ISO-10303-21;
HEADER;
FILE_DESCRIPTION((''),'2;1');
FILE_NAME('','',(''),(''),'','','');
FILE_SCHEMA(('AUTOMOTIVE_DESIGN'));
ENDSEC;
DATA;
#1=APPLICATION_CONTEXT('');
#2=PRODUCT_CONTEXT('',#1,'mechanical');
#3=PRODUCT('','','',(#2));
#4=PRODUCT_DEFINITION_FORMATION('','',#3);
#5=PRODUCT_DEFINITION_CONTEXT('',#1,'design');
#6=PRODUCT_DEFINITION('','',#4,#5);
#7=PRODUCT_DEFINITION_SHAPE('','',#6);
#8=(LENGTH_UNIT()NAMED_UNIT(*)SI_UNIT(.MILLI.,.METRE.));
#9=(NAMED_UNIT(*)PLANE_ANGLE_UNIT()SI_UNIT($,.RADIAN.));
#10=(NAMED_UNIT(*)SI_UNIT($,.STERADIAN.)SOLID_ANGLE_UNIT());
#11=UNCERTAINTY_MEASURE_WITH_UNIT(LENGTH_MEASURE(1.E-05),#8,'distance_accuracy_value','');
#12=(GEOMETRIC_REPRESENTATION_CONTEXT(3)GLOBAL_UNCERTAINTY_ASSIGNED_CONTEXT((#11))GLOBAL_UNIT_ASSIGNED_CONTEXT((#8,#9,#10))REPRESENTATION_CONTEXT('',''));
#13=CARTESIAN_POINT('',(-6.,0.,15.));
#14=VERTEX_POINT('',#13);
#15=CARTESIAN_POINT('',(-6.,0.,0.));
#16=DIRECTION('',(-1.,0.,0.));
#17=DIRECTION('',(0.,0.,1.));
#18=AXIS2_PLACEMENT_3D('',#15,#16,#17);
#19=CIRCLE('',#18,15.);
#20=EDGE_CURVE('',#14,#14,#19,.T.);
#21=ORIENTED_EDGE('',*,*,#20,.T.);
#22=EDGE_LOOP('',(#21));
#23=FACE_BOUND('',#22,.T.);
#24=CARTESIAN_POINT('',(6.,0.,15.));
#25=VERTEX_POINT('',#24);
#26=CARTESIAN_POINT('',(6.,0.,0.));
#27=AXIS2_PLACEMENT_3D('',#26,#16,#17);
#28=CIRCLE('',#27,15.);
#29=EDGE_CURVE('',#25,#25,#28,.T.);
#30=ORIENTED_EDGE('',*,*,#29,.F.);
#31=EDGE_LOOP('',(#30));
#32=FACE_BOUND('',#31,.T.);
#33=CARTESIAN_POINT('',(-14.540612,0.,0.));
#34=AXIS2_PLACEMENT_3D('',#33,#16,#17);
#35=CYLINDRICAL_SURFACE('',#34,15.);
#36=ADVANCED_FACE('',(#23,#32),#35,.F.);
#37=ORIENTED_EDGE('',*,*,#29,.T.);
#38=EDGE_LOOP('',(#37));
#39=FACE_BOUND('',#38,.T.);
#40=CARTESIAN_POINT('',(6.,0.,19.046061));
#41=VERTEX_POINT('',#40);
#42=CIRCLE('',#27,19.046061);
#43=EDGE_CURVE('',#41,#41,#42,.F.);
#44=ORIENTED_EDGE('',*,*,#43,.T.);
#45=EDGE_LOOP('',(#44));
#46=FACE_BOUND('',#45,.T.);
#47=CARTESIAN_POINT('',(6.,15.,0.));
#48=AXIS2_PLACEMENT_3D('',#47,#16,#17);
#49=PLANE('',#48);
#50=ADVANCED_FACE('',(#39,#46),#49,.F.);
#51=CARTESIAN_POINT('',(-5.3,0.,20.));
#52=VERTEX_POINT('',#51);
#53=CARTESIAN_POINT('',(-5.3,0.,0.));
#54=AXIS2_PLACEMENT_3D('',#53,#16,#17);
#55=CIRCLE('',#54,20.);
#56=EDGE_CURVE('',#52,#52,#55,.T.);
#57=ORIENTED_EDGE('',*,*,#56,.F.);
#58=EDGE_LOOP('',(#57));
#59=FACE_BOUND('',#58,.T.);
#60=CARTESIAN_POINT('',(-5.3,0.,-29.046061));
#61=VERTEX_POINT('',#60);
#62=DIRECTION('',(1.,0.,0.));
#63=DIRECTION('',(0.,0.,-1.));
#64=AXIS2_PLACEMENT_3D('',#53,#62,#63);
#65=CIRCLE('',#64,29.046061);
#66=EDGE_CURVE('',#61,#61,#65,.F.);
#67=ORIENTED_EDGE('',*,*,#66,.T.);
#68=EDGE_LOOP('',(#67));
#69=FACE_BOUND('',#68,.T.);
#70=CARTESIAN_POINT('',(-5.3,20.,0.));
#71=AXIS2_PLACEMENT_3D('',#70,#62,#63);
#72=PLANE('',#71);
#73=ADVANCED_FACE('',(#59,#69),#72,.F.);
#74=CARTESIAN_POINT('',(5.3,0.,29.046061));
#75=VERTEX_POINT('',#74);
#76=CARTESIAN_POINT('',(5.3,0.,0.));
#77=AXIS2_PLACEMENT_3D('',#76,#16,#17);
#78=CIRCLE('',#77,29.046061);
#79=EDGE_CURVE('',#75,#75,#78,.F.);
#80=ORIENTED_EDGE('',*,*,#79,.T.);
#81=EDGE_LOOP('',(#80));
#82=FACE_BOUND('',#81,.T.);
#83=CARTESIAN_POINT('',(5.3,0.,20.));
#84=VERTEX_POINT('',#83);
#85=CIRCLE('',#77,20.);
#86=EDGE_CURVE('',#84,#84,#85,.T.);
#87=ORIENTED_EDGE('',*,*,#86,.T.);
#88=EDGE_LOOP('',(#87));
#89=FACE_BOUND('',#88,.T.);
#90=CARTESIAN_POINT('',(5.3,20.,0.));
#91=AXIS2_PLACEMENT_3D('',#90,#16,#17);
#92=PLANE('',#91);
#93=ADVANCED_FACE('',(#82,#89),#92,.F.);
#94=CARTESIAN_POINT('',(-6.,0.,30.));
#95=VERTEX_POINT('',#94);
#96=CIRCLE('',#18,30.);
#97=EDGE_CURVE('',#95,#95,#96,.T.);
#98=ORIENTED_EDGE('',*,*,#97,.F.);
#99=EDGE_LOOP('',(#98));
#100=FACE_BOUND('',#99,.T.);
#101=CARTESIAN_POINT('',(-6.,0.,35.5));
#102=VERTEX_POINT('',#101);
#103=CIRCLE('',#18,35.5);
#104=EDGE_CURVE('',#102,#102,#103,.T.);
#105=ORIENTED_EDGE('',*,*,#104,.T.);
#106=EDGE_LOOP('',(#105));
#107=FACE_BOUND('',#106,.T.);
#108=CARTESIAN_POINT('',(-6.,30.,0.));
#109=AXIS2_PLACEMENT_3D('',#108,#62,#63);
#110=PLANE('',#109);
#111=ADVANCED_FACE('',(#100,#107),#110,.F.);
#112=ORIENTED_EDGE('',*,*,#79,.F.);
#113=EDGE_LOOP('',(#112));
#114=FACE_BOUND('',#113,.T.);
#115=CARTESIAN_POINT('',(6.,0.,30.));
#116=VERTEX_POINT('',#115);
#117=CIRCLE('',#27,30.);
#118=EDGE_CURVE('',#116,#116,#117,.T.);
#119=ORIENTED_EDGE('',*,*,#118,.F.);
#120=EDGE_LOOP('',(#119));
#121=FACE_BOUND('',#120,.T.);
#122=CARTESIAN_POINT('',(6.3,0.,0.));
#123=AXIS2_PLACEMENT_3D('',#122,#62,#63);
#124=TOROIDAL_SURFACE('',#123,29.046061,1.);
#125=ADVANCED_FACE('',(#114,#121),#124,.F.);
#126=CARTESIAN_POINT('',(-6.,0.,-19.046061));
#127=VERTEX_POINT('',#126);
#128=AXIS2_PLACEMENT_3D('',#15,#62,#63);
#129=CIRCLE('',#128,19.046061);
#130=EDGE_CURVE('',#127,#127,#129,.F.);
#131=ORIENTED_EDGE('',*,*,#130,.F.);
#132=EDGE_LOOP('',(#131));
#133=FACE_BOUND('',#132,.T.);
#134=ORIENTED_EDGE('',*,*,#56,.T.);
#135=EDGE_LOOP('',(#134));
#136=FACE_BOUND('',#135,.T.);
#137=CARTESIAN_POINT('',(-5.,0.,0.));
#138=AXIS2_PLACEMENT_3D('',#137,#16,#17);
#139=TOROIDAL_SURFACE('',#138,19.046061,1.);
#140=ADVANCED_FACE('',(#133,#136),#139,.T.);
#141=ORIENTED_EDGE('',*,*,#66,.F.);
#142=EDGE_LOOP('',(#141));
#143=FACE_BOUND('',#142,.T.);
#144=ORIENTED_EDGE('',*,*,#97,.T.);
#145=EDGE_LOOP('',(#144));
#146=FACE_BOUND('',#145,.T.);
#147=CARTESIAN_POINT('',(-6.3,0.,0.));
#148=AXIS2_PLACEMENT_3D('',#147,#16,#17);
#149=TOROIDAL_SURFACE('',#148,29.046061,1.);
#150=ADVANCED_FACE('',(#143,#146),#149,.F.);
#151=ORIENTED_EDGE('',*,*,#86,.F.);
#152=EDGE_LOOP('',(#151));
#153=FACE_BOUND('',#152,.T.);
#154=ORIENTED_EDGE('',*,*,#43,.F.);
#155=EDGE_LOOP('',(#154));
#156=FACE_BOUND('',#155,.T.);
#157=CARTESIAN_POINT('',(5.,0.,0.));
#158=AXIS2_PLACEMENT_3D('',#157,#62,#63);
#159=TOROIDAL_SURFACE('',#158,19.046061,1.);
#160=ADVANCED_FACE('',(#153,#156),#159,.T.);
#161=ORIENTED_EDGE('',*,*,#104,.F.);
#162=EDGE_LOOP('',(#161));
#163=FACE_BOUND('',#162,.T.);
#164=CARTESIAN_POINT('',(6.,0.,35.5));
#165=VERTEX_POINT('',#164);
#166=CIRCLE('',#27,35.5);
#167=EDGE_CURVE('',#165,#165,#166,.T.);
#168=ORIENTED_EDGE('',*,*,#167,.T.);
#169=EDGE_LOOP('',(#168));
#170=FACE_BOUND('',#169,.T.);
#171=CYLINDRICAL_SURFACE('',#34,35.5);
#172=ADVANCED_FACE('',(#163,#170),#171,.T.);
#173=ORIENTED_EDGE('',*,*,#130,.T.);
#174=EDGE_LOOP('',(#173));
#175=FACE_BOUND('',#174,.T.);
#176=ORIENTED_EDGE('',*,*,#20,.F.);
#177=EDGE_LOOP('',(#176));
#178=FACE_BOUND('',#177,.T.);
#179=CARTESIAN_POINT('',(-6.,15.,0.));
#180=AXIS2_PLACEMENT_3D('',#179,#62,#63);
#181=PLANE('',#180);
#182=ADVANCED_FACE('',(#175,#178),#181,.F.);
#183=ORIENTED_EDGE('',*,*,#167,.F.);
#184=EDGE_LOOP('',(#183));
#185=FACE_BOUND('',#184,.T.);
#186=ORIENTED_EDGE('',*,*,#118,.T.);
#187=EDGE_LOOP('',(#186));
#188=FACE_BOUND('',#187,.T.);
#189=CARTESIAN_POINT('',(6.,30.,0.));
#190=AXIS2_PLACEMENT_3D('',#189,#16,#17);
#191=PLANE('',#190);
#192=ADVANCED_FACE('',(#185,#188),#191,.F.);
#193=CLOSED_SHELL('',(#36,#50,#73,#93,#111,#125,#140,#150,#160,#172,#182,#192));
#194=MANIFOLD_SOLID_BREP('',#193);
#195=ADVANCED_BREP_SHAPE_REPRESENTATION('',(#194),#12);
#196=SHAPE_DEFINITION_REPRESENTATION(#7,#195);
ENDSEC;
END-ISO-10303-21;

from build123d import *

# Parameters (mm, degrees)
FILLET1_R = 1


with BuildPart() as part:
    # Sketch3 → Revolve1 (revolve)
    with BuildSketch(Plane.XY, mode=Mode.PRIVATE) as revolve1_sk:
        Polygon((6, 15), (-6, 15), (-6, 20), (-5.3, 20), (-5.3, 30), (-6, 30), (-6, 35.5), (6, 35.5), (6, 30), (5.3, 30), (5.3, 20), (6, 20), align=None)
    revolve(revolve1_sk.sketch.rotate(Axis((-14.54061226, 0, 0), (1, 0, 0)), 90), axis=Axis((-14.54061226, 0, 0), (1, 0, 0)))

    # Fillet1
    # the kernel refuses this fillet: 1 mm, written as the material it adds along each edge
    with BuildSketch(Plane(origin=(5.3, 0, 0), x_dir=(0, 0, 1), z_dir=(0, 1, 0))) as fillet1_piece_1:
        with BuildLine():
            CenterArc((29.046060799, 1), FILLET1_R, 270, 72.542396876)
            Line((29.046060799, 0), (29.046060799, -0.02))
            Line((29.046060799, -0.02), (30, -0.02))
            Line((30, -0.02), (30.02, 0))
            ThreePointArc((30.02, 0), (30.02, 0.35), (30.019078784, 0.694))
            Line((30.019078784, 0.694), (30, 0.7))
        make_face()
    revolve(axis=Axis((5.3, 0, 0), (1, 0, 0)))
    with BuildSketch(Plane(origin=(-5.3, 0, 0), x_dir=(0, 0, 1), z_dir=(0, 1, 0))) as fillet1_piece_2:
        with BuildLine():
            CenterArc((29.046060799, -1), FILLET1_R, 17.457603124, 72.542396876)
            Line((30, -0.7), (30.019078784, -0.694))
            ThreePointArc((30.019078784, -0.694), (30.02, -0.35), (30.02, 0))
            Line((30.02, 0), (30, 0.02))
            Line((30, 0.02), (29.046060799, 0.02))
            Line((29.046060799, 0.02), (29.046060799, 0))
        make_face()
    revolve(axis=Axis((-5.3, 0, 0), (1, 0, 0)))
    # the kernel refuses this fillet: 1 mm, written as the material it takes off along each edge
    with BuildSketch(Plane(origin=(6, 0, 0), x_dir=(0, 0, 1), z_dir=(0, 1, 0))) as fillet1_2_piece_1:
        with BuildLine():
            CenterArc((19.046060799, -1), FILLET1_R, 17.457603124, 72.542396876)
            Line((20, -0.7), (20.019078784, -0.694))
            ThreePointArc((20.019078784, -0.694), (20.02, -0.35), (20.02, 0))
            Line((20.02, 0), (20, 0.02))
            Line((20, 0.02), (19.046060799, 0.02))
            Line((19.046060799, 0.02), (19.046060799, 0))
        make_face()
    revolve(axis=Axis((6, 0, 0), (1, 0, 0)), mode=Mode.SUBTRACT)
    with BuildSketch(Plane(origin=(-6, 0, 0), x_dir=(0, 0, 1), z_dir=(0, 1, 0))) as fillet1_2_piece_2:
        with BuildLine():
            CenterArc((19.046060799, 1), FILLET1_R, 270, 72.542396876)
            Line((20, 0.7), (20.019078784, 0.694))
            ThreePointArc((20.019078784, 0.694), (20.02, 0.35), (20.02, 0))
            Line((20.02, 0), (20, -0.02))
            Line((20, -0.02), (19.046060799, -0.02))
            Line((19.046060799, -0.02), (19.046060799, 0))
        make_face()
    revolve(axis=Axis((-6, 0, 0), (1, 0, 0)), mode=Mode.SUBTRACT)


solid = part.part
